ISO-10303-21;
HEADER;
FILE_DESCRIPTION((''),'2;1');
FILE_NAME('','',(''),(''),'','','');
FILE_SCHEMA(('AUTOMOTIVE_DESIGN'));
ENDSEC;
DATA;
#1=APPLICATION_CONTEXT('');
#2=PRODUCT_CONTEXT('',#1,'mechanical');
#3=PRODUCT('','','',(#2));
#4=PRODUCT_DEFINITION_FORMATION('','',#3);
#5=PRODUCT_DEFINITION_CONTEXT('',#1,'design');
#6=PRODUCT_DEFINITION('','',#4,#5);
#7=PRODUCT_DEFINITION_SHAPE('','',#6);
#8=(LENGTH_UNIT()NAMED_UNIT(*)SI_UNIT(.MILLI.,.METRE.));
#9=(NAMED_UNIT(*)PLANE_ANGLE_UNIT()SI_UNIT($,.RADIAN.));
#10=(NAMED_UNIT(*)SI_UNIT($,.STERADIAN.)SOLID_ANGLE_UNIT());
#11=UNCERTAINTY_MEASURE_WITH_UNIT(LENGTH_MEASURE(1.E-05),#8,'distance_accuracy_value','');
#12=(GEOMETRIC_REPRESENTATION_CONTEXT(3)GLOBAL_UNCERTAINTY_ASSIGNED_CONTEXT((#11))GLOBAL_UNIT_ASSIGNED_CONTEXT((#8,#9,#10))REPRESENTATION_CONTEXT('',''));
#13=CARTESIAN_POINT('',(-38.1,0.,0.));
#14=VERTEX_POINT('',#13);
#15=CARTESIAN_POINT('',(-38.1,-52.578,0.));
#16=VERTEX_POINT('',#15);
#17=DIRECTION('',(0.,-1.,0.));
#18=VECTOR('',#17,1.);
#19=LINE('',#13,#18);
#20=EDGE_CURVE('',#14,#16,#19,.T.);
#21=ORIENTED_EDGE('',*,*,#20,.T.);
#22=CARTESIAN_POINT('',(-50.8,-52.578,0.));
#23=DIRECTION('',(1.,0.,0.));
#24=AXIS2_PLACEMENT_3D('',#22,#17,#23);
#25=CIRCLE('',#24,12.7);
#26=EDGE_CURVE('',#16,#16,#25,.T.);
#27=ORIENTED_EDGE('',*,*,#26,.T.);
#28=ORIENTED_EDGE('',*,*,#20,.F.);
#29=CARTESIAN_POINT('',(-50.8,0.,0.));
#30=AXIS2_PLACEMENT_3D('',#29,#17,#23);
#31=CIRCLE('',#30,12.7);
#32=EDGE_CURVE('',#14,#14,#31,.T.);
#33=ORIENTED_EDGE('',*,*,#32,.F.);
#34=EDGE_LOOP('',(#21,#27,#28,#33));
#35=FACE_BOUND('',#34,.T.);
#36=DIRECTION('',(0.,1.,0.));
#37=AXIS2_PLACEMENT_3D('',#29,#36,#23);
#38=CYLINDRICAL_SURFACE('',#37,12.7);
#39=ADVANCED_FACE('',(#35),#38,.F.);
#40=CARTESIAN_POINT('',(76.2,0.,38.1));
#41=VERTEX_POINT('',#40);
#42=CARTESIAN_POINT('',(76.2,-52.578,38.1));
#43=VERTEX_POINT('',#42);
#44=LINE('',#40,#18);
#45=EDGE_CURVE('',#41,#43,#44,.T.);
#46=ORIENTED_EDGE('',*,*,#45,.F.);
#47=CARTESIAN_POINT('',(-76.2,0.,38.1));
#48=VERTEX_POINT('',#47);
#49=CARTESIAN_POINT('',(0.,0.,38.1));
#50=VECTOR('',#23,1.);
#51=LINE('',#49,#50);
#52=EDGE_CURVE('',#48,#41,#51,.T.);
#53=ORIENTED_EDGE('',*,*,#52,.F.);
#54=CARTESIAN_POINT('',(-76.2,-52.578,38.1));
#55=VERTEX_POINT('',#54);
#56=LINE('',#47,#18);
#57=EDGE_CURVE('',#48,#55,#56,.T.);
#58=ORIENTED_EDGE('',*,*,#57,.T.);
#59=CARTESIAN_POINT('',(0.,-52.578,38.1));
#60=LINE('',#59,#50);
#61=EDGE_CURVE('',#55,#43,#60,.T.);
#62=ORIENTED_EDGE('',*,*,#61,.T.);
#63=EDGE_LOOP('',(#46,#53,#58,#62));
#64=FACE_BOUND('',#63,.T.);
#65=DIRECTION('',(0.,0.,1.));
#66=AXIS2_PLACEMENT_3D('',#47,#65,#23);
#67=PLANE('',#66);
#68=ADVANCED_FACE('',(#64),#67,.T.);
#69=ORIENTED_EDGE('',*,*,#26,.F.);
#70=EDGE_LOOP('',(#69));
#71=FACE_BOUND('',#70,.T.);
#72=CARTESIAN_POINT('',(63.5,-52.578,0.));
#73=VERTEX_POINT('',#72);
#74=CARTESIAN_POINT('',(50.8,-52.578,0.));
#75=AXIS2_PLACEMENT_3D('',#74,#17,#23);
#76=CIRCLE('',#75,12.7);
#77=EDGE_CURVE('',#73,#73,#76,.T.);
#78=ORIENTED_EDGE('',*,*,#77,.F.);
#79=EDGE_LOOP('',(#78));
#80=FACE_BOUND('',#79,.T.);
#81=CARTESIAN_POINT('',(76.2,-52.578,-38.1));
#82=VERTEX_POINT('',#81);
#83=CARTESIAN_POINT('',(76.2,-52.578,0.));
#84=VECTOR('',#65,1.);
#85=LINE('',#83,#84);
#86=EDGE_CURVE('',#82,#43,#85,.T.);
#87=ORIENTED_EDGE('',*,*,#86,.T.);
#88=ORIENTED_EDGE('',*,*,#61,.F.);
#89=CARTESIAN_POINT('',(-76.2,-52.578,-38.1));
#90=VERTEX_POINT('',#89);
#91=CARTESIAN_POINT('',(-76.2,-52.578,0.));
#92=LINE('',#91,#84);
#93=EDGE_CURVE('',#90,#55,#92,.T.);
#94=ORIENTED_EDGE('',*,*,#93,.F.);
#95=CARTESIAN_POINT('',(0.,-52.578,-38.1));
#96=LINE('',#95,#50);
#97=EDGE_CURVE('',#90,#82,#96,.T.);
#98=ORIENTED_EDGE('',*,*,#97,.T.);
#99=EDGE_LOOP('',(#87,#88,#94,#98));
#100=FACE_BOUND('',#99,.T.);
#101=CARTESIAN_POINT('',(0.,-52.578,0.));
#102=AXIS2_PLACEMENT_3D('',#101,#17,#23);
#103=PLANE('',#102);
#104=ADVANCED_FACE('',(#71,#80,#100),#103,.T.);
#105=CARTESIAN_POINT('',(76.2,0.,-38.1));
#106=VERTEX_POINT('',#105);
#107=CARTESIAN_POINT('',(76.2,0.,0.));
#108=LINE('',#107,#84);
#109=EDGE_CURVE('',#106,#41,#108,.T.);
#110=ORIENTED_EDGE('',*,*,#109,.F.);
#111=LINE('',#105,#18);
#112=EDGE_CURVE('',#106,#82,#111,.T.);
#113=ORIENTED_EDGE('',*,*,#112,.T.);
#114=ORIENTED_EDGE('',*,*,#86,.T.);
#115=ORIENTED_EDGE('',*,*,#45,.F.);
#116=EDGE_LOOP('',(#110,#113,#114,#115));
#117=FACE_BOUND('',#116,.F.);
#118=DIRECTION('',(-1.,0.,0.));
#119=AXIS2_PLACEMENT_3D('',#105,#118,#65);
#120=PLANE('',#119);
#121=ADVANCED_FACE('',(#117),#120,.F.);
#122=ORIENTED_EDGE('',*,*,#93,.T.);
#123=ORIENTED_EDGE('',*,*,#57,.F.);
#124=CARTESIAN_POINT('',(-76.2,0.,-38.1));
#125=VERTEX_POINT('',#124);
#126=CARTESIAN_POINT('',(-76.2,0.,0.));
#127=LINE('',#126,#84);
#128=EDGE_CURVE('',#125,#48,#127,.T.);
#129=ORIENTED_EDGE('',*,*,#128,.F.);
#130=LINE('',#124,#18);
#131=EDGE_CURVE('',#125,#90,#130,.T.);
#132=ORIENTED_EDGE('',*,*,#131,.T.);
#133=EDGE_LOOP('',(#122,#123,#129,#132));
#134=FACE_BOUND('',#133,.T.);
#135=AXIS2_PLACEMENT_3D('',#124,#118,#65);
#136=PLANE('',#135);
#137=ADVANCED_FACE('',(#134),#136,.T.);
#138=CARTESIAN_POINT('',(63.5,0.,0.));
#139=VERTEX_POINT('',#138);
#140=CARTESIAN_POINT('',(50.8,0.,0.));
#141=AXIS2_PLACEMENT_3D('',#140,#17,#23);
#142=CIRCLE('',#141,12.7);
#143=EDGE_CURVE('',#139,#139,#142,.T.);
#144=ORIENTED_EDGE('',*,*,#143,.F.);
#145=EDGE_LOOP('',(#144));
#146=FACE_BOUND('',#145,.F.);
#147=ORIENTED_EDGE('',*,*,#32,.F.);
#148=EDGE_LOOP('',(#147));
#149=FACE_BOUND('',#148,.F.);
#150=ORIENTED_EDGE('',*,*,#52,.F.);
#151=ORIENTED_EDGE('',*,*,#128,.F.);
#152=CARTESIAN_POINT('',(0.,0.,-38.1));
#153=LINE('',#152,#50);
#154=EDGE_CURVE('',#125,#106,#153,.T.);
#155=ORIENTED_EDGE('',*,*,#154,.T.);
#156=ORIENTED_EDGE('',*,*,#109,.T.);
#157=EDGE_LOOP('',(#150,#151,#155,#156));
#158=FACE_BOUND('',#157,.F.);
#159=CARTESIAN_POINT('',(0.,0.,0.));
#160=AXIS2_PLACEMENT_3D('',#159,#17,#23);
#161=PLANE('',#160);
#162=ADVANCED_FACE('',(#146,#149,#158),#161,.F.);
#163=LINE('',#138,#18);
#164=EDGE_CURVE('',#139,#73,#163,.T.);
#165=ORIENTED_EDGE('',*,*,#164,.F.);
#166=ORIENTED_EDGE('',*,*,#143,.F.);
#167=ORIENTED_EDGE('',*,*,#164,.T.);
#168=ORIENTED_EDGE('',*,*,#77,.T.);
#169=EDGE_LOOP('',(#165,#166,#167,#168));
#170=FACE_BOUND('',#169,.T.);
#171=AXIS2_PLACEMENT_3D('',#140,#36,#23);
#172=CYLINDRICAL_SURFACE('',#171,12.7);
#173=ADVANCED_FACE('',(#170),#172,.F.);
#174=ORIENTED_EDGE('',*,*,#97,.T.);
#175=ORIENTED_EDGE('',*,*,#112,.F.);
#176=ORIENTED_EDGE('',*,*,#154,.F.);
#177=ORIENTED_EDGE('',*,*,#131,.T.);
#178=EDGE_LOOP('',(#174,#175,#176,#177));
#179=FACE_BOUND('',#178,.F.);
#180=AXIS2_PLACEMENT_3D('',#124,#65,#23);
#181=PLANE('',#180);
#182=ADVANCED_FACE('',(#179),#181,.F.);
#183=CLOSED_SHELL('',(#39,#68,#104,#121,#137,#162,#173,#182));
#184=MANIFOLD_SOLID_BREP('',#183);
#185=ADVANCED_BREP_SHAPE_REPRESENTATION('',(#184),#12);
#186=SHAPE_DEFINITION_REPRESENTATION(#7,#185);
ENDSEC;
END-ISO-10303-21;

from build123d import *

# Parameters (mm, degrees)
F0_W     = 152.4
F0_H     = 76.2
F0_R     = 12.7
F2_DEPTH = 52.578


# Not quite as in the source:
# - the program builds the solid bodies; features that only make, move or delete a surface that nothing else refers to are left out


with BuildPart() as f2:
    # F0 (on Front) → F2 (new body)
    with BuildSketch(Plane.XZ):
        Rectangle(F0_W, F0_H)
        with Locations((-50.8, 0)):
            Circle(F0_R, mode=Mode.SUBTRACT)
        with Locations((50.8, 0)):
            Circle(F0_R, mode=Mode.SUBTRACT)
    extrude(amount=F2_DEPTH)


solid = f2.part
